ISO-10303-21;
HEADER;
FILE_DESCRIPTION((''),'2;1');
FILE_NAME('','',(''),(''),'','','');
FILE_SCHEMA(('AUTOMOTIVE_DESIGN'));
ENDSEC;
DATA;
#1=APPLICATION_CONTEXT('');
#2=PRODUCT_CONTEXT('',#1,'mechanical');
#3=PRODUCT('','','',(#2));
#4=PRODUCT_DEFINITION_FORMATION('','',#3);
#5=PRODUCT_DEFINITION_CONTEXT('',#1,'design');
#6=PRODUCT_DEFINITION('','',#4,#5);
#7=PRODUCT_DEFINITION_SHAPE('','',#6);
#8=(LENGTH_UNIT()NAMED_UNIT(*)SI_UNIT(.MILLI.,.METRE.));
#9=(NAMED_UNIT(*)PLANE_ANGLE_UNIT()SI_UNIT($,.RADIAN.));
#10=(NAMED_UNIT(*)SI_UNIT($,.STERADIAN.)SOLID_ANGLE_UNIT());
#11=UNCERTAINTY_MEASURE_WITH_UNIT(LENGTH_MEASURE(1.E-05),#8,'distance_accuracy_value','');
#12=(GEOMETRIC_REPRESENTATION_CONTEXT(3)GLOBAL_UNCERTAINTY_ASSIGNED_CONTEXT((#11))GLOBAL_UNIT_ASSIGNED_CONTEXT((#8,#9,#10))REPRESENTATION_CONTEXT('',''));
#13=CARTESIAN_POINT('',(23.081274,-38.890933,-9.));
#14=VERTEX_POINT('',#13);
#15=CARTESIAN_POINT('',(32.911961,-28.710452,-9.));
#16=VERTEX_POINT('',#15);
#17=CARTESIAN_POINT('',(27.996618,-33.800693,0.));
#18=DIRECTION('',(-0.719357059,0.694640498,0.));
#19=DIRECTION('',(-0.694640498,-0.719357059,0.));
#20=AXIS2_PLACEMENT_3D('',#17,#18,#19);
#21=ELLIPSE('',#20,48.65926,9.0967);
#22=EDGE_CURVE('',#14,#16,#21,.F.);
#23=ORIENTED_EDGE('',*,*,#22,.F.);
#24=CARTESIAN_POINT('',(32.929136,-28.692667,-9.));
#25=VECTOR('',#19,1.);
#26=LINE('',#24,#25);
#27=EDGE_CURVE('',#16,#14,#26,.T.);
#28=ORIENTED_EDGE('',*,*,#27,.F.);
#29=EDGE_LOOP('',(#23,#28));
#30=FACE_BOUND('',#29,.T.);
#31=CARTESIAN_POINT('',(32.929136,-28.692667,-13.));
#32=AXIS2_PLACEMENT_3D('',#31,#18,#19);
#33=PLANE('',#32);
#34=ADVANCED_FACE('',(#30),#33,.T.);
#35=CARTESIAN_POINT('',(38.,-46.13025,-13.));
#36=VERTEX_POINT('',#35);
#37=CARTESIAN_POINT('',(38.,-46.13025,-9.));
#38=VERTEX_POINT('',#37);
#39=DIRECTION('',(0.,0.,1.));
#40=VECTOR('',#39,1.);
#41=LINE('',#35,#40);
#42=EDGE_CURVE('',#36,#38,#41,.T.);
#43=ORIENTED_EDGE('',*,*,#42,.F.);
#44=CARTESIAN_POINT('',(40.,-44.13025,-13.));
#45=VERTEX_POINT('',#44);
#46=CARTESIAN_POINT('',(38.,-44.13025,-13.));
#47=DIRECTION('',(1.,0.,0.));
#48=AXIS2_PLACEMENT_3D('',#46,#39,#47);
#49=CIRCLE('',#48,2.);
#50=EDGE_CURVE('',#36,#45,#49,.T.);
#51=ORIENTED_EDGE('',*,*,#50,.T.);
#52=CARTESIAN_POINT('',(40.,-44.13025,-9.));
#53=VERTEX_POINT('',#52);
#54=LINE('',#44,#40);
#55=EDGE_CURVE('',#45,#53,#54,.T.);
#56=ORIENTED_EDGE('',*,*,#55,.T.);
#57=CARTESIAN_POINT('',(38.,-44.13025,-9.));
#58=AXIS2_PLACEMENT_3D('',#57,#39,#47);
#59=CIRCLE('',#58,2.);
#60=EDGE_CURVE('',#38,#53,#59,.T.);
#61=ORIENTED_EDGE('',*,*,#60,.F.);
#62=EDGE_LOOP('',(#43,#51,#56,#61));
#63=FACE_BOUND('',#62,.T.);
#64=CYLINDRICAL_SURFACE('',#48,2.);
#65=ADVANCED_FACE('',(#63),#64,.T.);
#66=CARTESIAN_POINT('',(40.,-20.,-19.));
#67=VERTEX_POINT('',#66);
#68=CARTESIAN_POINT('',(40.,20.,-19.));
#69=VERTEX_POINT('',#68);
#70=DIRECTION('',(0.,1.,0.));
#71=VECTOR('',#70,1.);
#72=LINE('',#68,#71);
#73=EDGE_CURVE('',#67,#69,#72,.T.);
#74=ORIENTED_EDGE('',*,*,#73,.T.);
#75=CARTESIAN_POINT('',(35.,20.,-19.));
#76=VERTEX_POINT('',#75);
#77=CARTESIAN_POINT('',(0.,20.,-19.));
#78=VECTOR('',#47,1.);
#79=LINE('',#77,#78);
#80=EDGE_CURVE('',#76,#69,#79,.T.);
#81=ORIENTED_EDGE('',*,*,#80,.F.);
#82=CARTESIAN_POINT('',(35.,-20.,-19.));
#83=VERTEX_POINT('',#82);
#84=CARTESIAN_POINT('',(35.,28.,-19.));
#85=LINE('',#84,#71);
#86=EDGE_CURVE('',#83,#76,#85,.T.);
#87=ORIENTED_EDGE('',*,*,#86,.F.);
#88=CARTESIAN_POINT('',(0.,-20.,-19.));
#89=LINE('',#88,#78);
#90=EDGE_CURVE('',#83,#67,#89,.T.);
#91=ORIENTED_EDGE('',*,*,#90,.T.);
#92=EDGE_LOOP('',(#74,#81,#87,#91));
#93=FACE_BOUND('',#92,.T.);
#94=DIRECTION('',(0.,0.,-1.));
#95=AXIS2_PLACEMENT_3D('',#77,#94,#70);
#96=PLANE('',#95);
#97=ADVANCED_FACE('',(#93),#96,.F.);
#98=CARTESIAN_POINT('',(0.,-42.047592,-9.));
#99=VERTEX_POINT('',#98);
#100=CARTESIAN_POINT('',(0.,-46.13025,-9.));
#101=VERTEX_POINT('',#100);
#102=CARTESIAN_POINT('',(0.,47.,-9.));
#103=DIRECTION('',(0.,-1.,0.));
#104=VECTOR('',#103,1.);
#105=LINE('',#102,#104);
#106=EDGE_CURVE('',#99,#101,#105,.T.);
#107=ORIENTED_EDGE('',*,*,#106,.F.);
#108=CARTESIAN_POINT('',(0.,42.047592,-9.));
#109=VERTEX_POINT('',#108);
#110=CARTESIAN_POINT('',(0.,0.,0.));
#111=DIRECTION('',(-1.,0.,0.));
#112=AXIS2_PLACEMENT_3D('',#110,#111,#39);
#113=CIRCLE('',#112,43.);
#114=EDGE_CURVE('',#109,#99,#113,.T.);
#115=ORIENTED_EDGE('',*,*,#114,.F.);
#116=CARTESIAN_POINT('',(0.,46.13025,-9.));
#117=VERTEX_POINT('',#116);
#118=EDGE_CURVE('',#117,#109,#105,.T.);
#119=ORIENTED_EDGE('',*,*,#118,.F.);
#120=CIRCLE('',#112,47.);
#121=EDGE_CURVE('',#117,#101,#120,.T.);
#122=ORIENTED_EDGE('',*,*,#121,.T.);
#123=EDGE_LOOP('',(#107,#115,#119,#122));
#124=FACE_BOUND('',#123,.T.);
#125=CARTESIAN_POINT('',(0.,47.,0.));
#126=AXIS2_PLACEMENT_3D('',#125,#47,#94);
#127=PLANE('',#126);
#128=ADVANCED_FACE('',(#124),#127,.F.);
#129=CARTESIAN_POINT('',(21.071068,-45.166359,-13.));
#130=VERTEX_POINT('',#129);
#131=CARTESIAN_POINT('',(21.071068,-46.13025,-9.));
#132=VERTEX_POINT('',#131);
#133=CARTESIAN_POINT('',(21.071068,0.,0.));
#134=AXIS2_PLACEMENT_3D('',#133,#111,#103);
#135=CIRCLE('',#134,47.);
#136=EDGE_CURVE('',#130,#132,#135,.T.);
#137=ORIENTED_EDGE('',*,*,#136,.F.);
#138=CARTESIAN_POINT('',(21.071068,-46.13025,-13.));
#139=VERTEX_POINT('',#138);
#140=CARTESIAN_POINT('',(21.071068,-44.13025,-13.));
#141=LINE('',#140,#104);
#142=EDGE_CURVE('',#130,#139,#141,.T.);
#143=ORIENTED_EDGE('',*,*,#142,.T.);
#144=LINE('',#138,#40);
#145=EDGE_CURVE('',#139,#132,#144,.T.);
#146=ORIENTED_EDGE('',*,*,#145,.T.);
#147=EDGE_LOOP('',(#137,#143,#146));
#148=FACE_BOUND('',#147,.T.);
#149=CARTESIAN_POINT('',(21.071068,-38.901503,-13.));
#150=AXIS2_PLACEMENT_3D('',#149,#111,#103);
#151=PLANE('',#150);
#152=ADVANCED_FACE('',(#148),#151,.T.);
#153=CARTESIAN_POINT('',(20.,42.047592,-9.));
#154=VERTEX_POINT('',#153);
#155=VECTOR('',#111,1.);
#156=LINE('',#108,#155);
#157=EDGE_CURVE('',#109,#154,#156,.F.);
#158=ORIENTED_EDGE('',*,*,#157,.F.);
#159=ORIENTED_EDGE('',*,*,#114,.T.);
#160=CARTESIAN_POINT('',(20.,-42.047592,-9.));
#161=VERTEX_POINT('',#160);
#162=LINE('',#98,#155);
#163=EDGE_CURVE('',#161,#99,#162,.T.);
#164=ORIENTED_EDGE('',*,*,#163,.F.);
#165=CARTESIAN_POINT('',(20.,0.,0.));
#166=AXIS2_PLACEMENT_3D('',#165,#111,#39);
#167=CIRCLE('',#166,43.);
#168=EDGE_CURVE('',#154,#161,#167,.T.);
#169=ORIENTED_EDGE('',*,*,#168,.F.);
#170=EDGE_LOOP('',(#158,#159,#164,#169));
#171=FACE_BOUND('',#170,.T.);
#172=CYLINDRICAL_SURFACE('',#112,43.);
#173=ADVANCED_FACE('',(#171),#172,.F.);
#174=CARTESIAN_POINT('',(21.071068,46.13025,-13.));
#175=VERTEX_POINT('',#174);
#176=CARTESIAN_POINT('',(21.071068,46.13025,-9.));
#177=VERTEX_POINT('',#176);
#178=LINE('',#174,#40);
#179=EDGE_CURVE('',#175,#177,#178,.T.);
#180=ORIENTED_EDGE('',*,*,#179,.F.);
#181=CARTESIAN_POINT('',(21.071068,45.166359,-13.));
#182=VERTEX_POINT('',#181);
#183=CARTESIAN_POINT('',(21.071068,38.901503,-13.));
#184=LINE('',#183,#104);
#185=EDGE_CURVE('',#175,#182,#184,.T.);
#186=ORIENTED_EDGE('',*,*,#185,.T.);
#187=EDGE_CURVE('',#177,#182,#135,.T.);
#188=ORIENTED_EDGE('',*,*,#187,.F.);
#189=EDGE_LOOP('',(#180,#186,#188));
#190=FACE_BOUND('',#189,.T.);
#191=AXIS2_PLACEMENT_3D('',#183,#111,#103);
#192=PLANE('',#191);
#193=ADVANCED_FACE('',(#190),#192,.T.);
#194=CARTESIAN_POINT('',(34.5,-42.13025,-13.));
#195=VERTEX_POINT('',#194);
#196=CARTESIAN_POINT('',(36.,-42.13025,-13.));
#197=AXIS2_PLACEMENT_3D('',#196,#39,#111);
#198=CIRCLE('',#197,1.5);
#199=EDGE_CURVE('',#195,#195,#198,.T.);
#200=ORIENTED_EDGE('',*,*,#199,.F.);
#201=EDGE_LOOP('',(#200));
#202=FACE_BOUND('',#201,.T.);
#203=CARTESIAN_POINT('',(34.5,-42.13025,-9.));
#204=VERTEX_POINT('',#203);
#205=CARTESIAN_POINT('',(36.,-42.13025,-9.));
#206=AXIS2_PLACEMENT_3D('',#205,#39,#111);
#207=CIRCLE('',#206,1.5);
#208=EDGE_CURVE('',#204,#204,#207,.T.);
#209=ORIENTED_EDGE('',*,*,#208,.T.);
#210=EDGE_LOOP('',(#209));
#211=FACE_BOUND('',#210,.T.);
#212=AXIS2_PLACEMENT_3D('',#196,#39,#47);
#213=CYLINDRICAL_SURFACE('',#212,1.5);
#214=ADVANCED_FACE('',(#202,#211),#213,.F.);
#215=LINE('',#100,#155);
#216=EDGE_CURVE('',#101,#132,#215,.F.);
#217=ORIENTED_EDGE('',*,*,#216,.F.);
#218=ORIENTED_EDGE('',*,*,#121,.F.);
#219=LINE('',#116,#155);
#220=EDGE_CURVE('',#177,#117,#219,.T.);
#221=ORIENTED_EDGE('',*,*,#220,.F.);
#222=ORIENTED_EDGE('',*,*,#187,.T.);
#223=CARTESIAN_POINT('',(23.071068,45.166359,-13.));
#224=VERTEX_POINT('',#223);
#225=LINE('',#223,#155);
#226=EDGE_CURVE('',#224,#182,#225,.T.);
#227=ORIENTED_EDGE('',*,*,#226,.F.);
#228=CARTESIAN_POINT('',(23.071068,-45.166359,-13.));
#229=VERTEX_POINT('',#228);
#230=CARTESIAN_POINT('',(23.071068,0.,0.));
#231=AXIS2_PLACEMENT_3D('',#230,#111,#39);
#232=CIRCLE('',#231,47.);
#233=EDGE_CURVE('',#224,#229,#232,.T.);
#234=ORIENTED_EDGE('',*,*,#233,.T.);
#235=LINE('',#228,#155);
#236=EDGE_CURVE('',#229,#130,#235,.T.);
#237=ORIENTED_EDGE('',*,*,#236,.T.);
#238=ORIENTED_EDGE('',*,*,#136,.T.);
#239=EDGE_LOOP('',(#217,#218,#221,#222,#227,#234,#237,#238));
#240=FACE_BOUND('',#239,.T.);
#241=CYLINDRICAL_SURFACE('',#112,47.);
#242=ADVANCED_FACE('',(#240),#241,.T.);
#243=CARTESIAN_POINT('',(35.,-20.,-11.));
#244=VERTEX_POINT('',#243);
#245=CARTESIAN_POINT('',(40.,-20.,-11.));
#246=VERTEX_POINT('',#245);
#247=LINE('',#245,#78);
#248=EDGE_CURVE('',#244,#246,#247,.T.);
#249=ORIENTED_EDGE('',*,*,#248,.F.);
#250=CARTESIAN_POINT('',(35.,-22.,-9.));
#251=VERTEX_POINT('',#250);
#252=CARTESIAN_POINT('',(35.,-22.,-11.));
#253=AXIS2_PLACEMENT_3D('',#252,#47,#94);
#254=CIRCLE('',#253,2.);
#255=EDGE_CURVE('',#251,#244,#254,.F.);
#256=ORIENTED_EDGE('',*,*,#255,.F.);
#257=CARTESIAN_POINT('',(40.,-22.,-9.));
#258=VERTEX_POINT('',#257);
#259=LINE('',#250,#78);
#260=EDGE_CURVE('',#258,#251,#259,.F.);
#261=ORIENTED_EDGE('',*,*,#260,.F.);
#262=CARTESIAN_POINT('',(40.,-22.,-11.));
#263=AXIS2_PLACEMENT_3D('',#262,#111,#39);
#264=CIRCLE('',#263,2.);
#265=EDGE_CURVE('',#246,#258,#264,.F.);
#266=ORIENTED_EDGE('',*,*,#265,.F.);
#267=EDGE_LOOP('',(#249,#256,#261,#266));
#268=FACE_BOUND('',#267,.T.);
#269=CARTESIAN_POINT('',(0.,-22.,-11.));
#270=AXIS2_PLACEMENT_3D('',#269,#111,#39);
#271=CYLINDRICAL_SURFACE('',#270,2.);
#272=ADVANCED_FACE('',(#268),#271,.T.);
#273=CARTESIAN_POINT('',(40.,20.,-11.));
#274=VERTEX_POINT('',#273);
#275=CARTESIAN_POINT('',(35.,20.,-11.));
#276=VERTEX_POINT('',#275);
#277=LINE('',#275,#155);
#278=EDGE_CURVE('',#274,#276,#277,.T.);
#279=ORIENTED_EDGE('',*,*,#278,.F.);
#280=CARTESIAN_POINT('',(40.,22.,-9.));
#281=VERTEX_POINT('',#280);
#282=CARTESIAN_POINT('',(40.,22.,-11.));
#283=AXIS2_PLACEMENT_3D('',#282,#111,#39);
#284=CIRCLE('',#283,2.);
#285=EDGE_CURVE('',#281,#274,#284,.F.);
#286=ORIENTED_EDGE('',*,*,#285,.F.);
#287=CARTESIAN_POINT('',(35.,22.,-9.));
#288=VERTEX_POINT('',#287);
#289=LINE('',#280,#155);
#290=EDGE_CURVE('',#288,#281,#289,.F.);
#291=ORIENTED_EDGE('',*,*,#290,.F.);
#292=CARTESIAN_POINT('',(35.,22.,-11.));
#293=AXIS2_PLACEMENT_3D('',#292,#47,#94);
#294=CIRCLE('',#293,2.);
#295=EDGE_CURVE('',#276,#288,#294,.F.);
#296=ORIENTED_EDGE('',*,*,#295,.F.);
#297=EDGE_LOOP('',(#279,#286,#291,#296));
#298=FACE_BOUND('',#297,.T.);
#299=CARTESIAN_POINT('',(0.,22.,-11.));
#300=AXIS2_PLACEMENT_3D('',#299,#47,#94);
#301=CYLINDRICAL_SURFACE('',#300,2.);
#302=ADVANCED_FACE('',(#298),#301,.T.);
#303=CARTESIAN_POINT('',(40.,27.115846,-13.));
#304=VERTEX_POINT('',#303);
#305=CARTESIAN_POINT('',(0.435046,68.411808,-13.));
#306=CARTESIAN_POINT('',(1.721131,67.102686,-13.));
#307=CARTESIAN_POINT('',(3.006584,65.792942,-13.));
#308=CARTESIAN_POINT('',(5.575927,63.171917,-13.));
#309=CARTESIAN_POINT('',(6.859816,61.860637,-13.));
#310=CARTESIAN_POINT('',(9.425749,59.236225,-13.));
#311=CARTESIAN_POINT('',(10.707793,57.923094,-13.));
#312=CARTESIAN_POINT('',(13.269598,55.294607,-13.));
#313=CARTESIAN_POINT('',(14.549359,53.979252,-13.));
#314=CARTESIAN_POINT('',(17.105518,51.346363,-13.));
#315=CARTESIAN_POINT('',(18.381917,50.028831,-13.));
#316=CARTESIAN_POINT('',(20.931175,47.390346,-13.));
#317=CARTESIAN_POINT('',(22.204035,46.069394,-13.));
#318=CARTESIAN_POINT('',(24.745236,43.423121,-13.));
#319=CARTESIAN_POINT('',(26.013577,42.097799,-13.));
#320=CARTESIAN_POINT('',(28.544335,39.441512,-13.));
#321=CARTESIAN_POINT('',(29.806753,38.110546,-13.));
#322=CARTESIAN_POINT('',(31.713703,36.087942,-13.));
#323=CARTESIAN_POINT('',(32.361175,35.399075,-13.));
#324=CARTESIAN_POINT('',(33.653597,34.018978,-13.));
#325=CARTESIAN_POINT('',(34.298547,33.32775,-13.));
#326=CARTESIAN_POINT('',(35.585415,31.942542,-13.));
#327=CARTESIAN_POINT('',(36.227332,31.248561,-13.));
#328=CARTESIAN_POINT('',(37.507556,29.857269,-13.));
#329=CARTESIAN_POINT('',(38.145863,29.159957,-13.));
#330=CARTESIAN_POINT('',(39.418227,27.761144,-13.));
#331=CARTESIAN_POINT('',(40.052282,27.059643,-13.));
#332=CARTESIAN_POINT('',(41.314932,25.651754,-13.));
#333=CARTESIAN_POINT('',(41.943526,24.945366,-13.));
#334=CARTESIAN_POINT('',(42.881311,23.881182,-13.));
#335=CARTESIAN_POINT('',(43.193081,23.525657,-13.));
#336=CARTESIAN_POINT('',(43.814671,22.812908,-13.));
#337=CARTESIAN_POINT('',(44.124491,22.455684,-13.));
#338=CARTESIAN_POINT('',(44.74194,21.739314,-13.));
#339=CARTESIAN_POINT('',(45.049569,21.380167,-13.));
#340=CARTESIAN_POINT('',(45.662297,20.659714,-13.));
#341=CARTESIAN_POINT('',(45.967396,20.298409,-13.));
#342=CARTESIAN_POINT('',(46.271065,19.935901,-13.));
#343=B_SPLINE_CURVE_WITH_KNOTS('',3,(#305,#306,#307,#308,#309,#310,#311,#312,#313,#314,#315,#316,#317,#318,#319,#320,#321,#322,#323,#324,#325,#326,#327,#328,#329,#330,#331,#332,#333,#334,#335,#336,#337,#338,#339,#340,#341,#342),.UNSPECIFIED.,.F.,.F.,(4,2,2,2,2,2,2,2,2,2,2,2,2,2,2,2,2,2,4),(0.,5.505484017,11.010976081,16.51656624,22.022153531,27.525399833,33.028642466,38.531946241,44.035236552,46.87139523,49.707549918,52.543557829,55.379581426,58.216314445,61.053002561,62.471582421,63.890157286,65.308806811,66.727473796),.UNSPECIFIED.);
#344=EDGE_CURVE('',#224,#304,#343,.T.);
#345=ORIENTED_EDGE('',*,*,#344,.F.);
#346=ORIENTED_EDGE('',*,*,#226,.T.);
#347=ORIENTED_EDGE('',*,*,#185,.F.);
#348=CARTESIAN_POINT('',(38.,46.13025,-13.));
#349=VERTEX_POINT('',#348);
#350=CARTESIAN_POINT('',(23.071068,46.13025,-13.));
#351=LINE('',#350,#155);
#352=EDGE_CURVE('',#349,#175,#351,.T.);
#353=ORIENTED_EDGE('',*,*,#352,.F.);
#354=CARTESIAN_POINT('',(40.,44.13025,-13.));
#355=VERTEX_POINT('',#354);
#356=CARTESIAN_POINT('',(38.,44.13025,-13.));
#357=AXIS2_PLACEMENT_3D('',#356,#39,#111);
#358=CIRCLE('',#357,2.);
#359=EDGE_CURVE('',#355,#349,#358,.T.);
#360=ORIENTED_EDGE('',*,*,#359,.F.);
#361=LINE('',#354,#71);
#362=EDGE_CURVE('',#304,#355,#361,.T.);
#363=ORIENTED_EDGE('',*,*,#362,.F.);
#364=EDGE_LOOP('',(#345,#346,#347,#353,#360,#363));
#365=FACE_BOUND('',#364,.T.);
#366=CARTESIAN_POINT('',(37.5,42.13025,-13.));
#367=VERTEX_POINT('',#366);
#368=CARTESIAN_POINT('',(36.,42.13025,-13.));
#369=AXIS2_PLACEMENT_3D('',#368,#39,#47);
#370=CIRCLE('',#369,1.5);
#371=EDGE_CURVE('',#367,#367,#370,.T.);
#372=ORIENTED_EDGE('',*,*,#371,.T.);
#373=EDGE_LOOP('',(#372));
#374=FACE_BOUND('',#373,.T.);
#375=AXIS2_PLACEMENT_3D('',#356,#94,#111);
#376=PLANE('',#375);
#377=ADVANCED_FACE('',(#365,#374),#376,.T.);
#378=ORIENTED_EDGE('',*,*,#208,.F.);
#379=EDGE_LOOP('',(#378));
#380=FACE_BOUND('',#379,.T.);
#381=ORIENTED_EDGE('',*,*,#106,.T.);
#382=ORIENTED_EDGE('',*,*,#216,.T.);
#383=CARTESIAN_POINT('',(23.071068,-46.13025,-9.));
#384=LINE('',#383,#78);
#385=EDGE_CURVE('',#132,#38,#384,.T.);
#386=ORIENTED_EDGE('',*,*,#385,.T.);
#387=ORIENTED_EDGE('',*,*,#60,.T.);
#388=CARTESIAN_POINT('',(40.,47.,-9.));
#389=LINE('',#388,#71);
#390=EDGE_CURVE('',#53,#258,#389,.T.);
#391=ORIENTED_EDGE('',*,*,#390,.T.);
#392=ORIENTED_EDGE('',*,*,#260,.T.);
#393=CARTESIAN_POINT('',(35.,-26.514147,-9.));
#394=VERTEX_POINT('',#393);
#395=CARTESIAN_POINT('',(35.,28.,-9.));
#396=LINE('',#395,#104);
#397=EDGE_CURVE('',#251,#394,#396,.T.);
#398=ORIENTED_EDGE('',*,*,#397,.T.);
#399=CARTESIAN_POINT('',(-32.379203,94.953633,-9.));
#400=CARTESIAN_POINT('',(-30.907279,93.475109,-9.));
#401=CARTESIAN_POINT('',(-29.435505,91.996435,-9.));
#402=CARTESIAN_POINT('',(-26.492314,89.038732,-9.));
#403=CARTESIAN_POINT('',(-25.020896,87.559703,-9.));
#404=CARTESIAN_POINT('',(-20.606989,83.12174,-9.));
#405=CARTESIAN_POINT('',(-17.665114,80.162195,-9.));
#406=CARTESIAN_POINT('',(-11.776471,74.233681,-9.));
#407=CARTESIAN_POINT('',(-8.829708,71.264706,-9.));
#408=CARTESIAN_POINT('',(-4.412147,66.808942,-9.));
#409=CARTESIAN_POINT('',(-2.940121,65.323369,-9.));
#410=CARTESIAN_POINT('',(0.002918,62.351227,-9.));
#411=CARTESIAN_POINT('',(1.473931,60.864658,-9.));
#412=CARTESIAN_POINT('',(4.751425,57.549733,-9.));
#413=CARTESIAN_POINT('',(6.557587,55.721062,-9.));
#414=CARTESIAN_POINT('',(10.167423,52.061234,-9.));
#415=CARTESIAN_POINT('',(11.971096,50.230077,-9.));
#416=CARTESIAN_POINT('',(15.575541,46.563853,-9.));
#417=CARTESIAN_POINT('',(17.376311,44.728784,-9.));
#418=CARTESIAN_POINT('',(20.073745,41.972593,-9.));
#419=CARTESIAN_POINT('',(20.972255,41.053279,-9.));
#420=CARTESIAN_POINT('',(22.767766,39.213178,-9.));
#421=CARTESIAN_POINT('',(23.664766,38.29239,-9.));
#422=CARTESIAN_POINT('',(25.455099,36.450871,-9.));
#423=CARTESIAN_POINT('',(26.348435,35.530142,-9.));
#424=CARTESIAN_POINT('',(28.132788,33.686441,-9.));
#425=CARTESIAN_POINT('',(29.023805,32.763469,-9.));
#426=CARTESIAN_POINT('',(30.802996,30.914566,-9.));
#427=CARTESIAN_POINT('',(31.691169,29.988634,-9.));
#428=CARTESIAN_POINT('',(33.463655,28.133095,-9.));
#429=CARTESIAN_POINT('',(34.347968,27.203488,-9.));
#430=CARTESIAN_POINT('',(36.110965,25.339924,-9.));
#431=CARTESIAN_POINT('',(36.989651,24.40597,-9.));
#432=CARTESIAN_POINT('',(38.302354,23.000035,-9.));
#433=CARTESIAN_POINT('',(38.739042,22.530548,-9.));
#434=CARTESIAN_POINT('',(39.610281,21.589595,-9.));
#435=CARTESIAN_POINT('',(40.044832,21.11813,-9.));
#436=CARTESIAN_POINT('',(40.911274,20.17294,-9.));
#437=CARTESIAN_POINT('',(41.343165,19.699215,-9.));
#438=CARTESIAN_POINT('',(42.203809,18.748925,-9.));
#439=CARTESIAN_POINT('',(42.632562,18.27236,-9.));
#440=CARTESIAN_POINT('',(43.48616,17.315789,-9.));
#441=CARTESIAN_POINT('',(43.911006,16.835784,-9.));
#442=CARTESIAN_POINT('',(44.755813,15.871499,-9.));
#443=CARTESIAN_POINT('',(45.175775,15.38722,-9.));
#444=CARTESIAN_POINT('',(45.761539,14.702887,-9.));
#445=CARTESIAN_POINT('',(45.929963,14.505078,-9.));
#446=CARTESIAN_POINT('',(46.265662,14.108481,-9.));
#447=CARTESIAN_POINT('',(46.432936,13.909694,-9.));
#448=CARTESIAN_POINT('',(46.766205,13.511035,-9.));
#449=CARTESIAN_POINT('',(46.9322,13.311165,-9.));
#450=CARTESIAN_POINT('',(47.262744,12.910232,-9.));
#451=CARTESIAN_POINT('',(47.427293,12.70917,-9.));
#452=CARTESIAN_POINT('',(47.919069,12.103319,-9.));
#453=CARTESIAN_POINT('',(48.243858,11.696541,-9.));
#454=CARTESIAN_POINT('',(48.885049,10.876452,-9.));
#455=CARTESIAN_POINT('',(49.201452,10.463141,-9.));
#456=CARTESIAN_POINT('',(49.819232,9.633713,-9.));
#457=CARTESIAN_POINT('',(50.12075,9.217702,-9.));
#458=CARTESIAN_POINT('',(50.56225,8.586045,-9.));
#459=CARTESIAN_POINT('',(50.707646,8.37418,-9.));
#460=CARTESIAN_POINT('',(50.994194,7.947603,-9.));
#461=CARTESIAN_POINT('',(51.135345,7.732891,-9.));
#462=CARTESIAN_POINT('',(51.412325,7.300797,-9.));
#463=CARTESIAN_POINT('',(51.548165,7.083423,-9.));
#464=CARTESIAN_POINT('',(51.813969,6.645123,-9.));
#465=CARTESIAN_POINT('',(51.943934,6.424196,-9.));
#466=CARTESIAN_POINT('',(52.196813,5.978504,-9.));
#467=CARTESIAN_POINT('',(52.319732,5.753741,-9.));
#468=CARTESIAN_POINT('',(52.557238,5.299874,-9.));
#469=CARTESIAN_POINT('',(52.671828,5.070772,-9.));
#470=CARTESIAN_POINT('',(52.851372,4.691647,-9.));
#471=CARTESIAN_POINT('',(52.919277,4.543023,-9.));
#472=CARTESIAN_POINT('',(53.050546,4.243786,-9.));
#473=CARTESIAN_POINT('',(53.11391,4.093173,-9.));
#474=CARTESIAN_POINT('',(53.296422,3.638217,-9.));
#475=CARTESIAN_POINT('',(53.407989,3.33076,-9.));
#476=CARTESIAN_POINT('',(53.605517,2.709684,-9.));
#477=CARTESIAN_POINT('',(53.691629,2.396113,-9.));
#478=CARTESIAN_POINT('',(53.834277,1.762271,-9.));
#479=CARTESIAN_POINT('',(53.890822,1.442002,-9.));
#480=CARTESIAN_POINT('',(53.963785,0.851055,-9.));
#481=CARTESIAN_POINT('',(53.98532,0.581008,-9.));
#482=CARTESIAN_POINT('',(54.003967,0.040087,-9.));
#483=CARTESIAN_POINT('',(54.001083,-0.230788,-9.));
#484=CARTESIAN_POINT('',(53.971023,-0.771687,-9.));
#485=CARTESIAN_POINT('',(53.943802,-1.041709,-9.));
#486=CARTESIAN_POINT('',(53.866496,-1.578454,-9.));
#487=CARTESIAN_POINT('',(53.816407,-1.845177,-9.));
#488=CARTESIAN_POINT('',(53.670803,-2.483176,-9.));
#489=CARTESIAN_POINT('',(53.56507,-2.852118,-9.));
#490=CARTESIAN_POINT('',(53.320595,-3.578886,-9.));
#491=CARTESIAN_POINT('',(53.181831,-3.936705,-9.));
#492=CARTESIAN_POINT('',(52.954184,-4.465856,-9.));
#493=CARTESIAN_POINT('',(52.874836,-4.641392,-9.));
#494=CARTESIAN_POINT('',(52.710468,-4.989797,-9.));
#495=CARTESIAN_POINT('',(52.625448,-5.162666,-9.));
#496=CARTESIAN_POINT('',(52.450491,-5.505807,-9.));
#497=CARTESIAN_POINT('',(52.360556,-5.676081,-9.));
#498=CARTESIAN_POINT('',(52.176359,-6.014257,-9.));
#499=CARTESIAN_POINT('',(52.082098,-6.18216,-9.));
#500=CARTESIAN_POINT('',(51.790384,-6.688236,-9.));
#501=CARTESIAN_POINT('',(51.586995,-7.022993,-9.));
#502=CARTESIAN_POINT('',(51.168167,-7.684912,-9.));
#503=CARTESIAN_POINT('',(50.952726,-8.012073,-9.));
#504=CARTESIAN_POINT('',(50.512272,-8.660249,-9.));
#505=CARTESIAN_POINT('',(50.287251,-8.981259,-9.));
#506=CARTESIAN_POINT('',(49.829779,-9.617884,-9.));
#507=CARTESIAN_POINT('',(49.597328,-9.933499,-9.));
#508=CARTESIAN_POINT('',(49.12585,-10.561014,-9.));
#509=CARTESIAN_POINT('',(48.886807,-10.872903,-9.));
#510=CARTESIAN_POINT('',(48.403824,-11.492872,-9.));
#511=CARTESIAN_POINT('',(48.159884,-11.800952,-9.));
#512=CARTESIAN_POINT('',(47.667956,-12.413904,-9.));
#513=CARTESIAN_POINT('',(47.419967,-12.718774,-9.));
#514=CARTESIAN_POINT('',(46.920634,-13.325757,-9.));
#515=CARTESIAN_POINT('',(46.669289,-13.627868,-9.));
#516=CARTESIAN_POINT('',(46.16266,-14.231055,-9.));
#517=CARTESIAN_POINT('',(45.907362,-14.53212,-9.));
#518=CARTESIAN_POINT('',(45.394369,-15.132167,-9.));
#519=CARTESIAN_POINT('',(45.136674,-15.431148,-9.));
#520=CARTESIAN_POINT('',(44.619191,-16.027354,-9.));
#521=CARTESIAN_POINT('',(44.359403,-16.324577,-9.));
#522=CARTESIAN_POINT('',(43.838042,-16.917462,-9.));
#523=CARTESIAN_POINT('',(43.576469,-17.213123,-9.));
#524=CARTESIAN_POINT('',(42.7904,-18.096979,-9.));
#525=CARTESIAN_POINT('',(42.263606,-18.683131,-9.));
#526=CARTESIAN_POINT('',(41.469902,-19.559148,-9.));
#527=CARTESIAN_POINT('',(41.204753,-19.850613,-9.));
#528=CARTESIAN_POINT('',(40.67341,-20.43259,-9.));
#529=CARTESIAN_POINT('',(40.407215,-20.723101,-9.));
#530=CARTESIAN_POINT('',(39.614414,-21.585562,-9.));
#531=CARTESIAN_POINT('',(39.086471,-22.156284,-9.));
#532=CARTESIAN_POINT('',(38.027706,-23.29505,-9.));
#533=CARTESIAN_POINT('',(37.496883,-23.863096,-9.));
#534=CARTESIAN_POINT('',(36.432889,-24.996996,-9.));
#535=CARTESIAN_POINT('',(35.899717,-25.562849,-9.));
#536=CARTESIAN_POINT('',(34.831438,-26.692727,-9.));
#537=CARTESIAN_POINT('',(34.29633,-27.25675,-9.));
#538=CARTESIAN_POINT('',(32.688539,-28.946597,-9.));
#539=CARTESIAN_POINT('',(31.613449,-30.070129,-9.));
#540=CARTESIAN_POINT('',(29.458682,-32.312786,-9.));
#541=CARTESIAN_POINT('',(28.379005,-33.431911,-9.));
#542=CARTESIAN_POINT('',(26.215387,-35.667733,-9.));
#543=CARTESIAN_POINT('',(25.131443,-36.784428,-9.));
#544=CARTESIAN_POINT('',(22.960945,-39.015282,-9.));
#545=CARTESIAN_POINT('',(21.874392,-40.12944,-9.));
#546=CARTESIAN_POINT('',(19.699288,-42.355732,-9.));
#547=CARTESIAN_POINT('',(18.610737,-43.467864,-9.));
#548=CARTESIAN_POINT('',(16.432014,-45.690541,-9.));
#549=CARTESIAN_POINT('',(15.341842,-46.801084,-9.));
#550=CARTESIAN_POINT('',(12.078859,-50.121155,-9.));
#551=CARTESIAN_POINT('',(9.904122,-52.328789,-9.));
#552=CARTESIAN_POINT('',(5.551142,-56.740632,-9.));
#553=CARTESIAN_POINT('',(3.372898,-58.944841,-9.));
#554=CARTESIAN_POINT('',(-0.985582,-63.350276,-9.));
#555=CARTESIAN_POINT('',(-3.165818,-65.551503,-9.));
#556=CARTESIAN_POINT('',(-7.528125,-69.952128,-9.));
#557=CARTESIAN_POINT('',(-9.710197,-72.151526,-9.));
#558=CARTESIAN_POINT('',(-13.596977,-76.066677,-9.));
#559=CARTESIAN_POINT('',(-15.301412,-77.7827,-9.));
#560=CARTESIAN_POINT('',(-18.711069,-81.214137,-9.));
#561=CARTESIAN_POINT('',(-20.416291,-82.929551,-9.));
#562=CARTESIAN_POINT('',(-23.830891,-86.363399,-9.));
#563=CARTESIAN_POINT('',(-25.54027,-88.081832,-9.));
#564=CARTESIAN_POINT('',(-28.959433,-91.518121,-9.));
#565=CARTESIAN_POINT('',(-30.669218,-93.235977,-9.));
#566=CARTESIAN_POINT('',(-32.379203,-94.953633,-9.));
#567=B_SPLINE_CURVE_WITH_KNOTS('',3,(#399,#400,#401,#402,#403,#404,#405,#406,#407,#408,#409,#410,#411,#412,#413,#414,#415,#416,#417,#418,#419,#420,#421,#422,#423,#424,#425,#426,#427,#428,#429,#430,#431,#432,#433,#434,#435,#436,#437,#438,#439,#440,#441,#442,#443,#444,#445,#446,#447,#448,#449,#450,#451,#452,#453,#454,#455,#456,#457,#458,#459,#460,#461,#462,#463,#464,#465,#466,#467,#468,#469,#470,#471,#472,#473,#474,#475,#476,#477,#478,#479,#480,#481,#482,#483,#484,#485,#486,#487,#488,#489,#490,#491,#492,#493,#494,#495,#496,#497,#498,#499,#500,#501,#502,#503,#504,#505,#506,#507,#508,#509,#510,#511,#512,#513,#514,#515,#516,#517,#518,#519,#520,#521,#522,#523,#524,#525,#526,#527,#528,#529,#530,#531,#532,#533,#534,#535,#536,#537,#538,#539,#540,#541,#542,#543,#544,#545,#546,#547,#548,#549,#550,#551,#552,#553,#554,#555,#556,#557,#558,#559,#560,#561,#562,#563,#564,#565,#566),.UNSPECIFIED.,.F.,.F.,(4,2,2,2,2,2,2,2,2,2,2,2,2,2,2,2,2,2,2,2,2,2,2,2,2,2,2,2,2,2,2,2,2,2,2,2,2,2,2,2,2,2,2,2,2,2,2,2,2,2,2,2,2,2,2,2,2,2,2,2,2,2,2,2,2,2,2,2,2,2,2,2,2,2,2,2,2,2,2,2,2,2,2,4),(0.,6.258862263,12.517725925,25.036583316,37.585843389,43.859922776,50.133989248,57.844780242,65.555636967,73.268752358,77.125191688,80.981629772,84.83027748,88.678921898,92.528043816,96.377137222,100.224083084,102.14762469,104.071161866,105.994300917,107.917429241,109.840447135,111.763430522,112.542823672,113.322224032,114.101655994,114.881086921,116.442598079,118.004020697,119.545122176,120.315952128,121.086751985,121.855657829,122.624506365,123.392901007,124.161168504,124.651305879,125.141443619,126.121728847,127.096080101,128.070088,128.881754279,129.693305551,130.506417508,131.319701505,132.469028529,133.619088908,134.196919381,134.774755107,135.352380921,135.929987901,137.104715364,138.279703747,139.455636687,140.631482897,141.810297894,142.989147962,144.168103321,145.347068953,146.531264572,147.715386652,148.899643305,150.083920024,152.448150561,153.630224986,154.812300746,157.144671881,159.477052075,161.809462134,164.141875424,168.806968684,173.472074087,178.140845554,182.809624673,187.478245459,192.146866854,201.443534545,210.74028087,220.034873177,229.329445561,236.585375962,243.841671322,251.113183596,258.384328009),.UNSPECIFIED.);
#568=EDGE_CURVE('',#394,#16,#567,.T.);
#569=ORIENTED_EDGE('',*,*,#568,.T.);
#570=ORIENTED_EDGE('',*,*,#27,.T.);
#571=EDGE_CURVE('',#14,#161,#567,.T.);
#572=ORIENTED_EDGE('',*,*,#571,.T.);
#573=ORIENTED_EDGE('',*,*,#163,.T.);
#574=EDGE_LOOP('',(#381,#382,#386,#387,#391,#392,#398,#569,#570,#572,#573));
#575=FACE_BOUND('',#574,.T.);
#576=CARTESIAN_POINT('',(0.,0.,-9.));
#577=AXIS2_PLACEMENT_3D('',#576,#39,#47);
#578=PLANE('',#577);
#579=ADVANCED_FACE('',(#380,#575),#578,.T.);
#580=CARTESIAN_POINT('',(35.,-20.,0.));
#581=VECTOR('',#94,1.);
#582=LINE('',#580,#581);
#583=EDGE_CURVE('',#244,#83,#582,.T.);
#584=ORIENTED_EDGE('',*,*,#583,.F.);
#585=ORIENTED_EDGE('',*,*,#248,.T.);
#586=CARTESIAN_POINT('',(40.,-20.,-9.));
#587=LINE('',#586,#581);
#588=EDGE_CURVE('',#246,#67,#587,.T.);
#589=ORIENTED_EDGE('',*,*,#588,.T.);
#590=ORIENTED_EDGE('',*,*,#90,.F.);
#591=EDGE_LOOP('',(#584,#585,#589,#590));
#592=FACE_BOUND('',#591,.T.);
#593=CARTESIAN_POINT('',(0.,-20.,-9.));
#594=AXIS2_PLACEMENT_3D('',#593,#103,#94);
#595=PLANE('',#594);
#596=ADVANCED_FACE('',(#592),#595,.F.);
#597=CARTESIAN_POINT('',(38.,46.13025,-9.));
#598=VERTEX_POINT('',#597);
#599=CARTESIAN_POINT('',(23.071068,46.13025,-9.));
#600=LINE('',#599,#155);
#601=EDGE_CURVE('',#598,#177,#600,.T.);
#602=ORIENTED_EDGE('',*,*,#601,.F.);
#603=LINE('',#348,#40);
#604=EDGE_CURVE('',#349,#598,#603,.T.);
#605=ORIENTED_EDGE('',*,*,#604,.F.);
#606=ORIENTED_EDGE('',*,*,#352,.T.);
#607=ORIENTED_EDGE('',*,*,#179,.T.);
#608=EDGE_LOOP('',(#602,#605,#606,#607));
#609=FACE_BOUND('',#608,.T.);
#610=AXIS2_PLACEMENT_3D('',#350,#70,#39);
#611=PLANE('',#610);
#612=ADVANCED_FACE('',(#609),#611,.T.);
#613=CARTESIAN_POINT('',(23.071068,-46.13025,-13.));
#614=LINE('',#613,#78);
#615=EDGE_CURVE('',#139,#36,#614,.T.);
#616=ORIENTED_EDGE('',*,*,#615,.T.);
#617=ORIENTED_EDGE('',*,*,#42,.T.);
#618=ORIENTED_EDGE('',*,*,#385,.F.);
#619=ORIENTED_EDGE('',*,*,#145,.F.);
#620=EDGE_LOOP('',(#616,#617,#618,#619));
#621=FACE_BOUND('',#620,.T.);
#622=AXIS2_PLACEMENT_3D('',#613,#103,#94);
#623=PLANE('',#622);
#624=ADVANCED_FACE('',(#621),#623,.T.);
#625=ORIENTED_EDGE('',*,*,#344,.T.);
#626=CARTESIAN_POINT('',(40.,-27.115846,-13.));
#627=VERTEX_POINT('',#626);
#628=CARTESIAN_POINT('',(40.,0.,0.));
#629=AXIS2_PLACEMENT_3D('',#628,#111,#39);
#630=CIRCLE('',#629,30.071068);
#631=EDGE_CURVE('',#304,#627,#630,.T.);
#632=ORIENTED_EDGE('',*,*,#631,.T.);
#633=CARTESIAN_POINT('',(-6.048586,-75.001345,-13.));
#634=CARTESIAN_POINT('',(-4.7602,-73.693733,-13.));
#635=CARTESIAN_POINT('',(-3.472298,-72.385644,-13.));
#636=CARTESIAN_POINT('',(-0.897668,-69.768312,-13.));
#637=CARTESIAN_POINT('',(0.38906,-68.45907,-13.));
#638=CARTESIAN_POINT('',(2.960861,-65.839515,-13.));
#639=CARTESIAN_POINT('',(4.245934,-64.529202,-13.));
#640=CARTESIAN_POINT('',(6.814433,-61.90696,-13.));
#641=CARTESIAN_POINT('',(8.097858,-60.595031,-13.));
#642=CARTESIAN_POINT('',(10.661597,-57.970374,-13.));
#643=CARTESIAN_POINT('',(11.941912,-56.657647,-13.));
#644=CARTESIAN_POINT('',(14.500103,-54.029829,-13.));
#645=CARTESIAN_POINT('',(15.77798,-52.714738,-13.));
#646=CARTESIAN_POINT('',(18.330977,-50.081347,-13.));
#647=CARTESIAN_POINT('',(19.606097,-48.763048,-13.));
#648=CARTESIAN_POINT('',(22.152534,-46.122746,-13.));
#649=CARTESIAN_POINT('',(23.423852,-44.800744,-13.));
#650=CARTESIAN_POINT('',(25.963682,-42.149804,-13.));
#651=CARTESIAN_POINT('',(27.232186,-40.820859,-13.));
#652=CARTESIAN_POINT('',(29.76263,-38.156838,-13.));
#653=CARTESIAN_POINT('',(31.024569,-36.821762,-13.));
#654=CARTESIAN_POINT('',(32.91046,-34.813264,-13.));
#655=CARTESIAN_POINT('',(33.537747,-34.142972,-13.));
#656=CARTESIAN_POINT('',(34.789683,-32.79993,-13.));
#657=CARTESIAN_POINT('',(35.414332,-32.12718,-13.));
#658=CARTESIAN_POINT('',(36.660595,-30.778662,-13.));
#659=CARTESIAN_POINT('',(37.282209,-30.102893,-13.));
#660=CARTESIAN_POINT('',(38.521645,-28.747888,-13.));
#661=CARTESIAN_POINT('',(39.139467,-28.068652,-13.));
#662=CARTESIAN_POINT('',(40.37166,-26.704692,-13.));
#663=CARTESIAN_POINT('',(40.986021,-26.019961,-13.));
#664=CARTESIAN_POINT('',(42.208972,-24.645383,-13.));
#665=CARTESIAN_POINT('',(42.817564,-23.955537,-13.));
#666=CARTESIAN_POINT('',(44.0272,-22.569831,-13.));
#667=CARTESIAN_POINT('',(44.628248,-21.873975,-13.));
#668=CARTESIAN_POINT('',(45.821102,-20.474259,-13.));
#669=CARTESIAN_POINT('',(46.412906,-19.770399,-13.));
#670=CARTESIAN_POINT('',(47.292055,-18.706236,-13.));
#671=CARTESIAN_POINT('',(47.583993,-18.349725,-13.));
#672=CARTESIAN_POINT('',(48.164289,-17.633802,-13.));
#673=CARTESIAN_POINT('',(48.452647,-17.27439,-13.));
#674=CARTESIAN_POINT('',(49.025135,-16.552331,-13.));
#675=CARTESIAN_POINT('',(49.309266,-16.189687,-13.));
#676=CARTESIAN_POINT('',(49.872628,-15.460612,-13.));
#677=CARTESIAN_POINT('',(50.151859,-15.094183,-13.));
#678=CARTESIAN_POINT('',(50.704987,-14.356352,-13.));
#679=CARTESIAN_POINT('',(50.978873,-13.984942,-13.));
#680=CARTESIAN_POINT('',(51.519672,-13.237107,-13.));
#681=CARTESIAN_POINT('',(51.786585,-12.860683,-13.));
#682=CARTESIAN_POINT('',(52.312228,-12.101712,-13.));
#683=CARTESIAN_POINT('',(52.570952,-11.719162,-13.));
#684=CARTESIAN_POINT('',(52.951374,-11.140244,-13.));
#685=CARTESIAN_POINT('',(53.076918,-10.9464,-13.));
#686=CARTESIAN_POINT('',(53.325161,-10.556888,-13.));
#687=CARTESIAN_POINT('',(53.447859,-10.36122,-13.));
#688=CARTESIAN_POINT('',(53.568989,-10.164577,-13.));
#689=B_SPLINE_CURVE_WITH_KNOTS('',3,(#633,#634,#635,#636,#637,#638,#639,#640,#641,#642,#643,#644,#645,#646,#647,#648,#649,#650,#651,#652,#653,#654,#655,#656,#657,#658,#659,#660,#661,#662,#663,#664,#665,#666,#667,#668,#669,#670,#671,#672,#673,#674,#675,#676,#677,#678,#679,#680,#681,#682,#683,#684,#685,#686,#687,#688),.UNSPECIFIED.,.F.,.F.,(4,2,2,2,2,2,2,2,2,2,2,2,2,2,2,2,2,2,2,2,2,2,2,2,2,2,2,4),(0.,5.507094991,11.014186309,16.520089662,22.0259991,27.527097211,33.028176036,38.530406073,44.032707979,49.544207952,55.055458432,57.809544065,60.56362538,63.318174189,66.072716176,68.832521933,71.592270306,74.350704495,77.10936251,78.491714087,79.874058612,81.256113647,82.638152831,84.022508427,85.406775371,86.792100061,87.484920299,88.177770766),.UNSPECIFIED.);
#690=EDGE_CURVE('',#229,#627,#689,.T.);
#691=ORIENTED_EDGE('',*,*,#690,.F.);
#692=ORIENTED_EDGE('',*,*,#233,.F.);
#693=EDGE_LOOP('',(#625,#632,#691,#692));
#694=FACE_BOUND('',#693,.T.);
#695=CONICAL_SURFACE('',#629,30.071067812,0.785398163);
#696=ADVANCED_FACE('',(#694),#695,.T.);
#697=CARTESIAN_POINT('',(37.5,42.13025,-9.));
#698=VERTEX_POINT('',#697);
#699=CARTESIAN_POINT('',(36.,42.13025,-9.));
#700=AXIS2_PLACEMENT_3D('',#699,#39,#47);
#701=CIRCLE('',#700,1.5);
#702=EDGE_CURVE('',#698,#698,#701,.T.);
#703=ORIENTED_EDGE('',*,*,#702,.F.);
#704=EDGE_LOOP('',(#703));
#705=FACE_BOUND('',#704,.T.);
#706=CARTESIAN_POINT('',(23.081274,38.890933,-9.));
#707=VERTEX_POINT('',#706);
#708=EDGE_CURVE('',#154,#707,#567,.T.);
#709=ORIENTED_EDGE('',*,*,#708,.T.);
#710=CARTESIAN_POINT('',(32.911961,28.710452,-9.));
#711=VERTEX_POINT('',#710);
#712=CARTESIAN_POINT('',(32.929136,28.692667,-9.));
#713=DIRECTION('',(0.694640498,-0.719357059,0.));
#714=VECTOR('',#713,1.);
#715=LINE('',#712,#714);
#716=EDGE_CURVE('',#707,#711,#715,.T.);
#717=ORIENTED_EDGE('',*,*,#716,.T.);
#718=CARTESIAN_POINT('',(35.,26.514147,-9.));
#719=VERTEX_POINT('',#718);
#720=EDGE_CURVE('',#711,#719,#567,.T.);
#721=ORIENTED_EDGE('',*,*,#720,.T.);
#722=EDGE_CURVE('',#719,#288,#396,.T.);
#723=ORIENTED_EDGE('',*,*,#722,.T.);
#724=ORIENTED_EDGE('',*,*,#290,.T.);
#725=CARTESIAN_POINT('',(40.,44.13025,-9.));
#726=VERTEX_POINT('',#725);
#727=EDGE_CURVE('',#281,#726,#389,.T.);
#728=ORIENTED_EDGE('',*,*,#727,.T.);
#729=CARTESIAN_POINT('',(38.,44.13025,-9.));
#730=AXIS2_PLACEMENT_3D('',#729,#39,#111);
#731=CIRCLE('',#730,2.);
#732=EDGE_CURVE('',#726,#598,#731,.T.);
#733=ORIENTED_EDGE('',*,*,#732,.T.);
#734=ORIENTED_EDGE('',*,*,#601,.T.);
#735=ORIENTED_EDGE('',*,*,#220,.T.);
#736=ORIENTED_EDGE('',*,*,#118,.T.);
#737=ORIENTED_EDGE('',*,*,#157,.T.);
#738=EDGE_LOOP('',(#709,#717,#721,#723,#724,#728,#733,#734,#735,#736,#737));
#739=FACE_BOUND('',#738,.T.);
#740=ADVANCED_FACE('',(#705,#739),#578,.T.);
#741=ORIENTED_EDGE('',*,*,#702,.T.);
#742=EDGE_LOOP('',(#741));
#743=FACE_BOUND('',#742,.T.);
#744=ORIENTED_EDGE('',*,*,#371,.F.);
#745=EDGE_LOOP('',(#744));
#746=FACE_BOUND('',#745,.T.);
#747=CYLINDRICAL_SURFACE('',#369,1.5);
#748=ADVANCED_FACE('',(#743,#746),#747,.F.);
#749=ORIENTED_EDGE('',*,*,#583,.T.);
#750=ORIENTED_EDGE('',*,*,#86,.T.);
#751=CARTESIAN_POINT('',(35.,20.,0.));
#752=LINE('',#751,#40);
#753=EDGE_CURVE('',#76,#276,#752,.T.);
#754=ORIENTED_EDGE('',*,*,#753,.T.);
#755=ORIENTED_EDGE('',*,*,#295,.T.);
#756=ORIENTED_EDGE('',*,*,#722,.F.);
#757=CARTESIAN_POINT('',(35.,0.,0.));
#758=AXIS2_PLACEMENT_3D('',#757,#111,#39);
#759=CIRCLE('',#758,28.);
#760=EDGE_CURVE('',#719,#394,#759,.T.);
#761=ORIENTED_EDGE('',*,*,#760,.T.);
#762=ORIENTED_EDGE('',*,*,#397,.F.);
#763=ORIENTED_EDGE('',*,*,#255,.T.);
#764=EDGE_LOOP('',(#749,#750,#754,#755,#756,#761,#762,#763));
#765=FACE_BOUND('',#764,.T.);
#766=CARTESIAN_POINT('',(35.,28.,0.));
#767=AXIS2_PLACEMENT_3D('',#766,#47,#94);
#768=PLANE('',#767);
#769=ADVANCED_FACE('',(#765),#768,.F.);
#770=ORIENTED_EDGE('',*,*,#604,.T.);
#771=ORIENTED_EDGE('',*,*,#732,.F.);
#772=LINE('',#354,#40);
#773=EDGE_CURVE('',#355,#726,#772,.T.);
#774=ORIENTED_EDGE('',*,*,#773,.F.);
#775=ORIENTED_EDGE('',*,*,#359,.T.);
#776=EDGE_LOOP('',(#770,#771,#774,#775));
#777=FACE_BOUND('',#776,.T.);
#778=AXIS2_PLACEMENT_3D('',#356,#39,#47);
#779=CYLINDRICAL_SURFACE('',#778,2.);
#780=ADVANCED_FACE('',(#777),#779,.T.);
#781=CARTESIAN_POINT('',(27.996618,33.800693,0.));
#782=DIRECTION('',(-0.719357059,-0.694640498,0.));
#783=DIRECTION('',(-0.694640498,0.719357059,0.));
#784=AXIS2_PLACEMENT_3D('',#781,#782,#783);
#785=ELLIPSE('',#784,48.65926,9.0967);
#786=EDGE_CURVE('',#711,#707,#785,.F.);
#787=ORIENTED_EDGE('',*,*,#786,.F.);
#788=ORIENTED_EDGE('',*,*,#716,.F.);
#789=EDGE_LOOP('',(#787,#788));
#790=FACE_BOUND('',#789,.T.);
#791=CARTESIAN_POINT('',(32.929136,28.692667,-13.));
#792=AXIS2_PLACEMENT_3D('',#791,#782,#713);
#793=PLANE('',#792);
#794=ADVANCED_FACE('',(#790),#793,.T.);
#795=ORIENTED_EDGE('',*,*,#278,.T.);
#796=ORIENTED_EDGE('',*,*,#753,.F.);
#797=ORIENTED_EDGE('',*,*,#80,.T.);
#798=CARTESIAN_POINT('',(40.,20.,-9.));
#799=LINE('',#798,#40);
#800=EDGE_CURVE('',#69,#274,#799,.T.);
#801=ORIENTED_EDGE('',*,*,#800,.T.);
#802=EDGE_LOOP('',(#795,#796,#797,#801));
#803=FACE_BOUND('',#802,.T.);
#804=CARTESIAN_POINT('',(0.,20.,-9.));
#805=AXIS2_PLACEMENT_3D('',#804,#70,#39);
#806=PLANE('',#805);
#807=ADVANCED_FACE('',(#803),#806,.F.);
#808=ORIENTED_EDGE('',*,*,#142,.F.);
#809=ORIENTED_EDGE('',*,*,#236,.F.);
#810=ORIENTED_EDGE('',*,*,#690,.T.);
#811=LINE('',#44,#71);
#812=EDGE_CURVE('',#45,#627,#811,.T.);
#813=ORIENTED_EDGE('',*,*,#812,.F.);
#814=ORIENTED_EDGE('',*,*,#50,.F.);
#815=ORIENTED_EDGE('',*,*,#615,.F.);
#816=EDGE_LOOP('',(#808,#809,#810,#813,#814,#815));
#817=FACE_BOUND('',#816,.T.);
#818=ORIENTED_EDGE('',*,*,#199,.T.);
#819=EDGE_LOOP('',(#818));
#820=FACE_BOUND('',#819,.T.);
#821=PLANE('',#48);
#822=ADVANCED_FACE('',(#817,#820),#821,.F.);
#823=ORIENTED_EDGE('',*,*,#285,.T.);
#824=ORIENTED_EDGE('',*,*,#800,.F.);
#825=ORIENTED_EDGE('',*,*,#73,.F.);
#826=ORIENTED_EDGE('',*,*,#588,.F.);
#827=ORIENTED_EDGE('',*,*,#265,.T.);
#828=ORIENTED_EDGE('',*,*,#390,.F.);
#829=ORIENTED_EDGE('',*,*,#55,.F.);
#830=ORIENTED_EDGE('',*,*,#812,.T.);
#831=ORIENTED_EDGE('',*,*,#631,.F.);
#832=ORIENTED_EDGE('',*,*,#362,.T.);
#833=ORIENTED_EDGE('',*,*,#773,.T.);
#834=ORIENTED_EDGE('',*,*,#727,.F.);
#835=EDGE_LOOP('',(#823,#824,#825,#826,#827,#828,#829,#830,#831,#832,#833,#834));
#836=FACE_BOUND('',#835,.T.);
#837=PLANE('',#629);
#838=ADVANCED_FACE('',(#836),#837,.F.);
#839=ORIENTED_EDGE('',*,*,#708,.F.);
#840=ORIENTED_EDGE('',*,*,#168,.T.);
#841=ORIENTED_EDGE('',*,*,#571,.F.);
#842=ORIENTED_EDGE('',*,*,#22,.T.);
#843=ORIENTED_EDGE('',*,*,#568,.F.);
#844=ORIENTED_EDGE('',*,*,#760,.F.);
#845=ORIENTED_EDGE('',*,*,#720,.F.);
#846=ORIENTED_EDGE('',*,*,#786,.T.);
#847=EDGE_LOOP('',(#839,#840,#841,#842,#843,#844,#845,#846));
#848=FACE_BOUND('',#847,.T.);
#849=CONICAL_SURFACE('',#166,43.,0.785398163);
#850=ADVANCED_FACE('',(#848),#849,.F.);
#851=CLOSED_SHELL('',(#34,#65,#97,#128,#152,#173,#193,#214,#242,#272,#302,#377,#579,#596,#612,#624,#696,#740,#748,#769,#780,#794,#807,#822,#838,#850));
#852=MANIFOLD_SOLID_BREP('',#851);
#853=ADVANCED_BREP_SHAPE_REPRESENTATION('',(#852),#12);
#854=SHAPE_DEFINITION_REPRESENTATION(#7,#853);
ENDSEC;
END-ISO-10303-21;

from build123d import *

# Parameters (mm, degrees)
CUT_EXTRUDE1_DEPTH      = 78.575769413
CUT_EXTRUDE1_DEPTH_BACK = 9
SKETCH2_W               = 40
SKETCH2_H               = 94
SKETCH3_W               = 10
SKETCH3_H               = 40
CUT_EXTRUDE2_DEPTH      = 78.05193054
SKETCH4_R               = 1.5
BOSS_EXTRUDE1_DEPTH     = 4
MOVE_START              = -46.130250379
MOVE_FACE1_OUTLINE_W    = 16.928932188
MOVE_FACE1_OUTLINE_H    = 4
MOVE_FACE1_DEPTH        = 0.963891216
MOVE_START_2            = 45.166359163
MOVE_FACE1_2_OUTLINE_W  = 16.928932188
MOVE_FACE1_2_OUTLINE_H  = 4
MOVE_FACE1_2_DEPTH      = 0.963891216
MOVE_START_3            = -28.692666648
MOVE_FACE1_3_DEPTH      = 1.57682047
MOVE_START_4            = 27.115846178
MOVE_FACE1_4_DEPTH      = 1.57682047
FILLET1_R               = 2


with BuildPart() as part:
    # Sketch1 → Revolve1 (revolve)
    with BuildSketch(Plane.XY, mode=Mode.PRIVATE) as revolve1_sk:
        Polygon((0, 47), (23.071067812, 47), (40, 30.071067812), (40, 0), (35, 0), (35, 28), (20, 43), (0, 43), align=None)
    revolve(revolve1_sk.sketch.rotate(Axis((0, 0, 0), (1, 0, 0)), 90), axis=Axis((0, 0, 0), (1, 0, 0)))

    # Sketch2 → Cut-Extrude1 (cut, two sides: drawn at the far end of the back side and taken through both)
    with BuildSketch(Plane.XY.offset(-CUT_EXTRUDE1_DEPTH_BACK)):
        with Locations((20, 0)):
            Rectangle(SKETCH2_W, SKETCH2_H)
    extrude(amount=CUT_EXTRUDE1_DEPTH + CUT_EXTRUDE1_DEPTH_BACK, mode=Mode.SUBTRACT)

    # Sketch3 → Cut-Extrude2 (cut, through all)
    with BuildSketch(Plane(origin=(40, 0, 0), x_dir=(0, 0, -1), z_dir=(1, 0, 0))):
        with Locations((14, 0)):
            Rectangle(SKETCH3_W, SKETCH3_H)
    extrude(amount=-CUT_EXTRUDE2_DEPTH, mode=Mode.SUBTRACT)

    # Sketch4 → Boss-Extrude1 (add)
    # profile 1 of 2: a face of its own
    with BuildSketch(Plane.XY.offset(-9)):
        with BuildLine():
            Line((23.071067812, 46.130250379), (38, 46.130250379))
            ThreePointArc((38, 46.130250379), (39.414213562, 45.544463941), (40, 44.130250379))
            Line((40, 44.130250379), (40, 28.692666648))
            Line((40, 28.692666648), (32.929135877, 28.692666648))
            Line((32.929135877, 28.692666648), (23.071067812, 38.901502546))
            Line((23.071067812, 38.901502546), (23.071067812, 46.130250379))
        make_face()
        with Locations((36, 42.130250379)):
            Circle(SKETCH4_R, mode=Mode.SUBTRACT)
    # profile 2 of 2: a face of its own
    with BuildSketch(Plane.XY.offset(-9)):
        with BuildLine():
            Line((23.071067812, -38.901502546), (23.071067812, -46.130250379))
            Line((23.071067812, -46.130250379), (38, -46.130250379))
            ThreePointArc((38, -46.130250379), (39.414213562, -45.544463941), (40, -44.130250379))
            Line((40, -44.130250379), (40, -28.692666648))
            Line((40, -28.692666648), (32.929135877, -28.692666648))
            Line((32.929135877, -28.692666648), (23.071067812, -38.901502546))
        make_face()
        with Locations(Location((36, -42.130250379, 0), (0, 0, 180))):
            Circle(SKETCH4_R, mode=Mode.SUBTRACT)
    extrude(amount=-BOSS_EXTRUDE1_DEPTH)


with BuildPart() as move_face1_tool:
    # Move Face1: read off the stored shape, not the designer's step
    # Move Face1 outline → Move Face1 (new body)
    with BuildSketch(Plane(origin=(0, 0, 0), x_dir=(1, 0, 0), z_dir=(0, 1, 0)).offset(MOVE_START)):
        with Locations((29.535533906, 11)):
            Rectangle(MOVE_FACE1_OUTLINE_W, MOVE_FACE1_OUTLINE_H)
    extrude(amount=MOVE_FACE1_DEPTH)


with BuildPart() as part_1:
    add(part.part)


with BuildPart() as part_2:
    # Move Face1: joined with move_face1_tool
    add(part_1.part.fuse(move_face1_tool.part, tol=0.00001))


with BuildPart() as move_face1_2_tool:
    # Move Face1 2 outline → Move Face1 2 (new body)
    with BuildSketch(Plane(origin=(0, 0, 0), x_dir=(1, 0, 0), z_dir=(0, 1, 0)).offset(MOVE_START_2)):
        with Locations((29.535533906, 11)):
            Rectangle(MOVE_FACE1_2_OUTLINE_W, MOVE_FACE1_2_OUTLINE_H)
    extrude(amount=MOVE_FACE1_2_DEPTH)


with BuildPart() as part_3:
    add(part_2.part)


with BuildPart() as part_4:
    # Move Face1 2: joined with move_face1_2_tool
    add(part_3.part.fuse(move_face1_2_tool.part, tol=0.00001))


with BuildPart() as move_face1_3_tool:
    # Move Face1 3 outline → Move Face1 3 (new body)
    with BuildSketch(Plane(origin=(0, 0, 0), x_dir=(1, 0, 0), z_dir=(0, 1, 0)).offset(MOVE_START_3)):
        with BuildLine():
            Line((40, 13), (38.57076781, 13.000001435))
            add(Edge.make_bspline(
                [(38.57076781, 13.000001435), (38.71437599, 12.652027053), (38.853897492, 12.302357037), (39.340707465, 11.036237384), (39.662536412, 10.10974197), (39.965458557, 9.114909953), (39.982798274, 9.057475387), (40.00000015, 9.000000045)],
                knots=[15.019424216, 15.019424216, 15.019424216, 15.019424216, 16.148697383, 16.148697383, 19.088168409, 19.088168409, 19.268134003, 19.268134003, 19.268134003, 19.268134003], degree=3))
            Line((40.00000015, 9.000000045), (40, 13))
        make_face()
    extrude(amount=MOVE_FACE1_3_DEPTH)


with BuildPart() as part_5:
    add(part_4.part)


with BuildPart() as part_6:
    # Move Face1 3: joined with move_face1_3_tool
    add(part_5.part.fuse(move_face1_3_tool.part, tol=0.00001))


with BuildPart() as move_face1_4_tool:
    # Move Face1 4 outline → Move Face1 4 (new body)
    with BuildSketch(Plane(origin=(0, 0, 0), x_dir=(1, 0, 0), z_dir=(0, 1, 0)).offset(MOVE_START_4)):
        with BuildLine():
            Line((40, 13), (38.57076781, 13.000001435))
            add(Edge.make_bspline(
                [(38.57076781, 13.000001435), (38.71437599, 12.652027053), (38.853897492, 12.302357037), (39.340707465, 11.036237384), (39.662536412, 10.10974197), (39.965458557, 9.114909953), (39.982798274, 9.057475387), (40.00000015, 9.000000045)],
                knots=[15.019424216, 15.019424216, 15.019424216, 15.019424216, 16.148697383, 16.148697383, 19.088168409, 19.088168409, 19.268134003, 19.268134003, 19.268134003, 19.268134003], degree=3))
            Line((40.00000015, 9.000000045), (40, 13))
        make_face()
    extrude(amount=MOVE_FACE1_4_DEPTH)


with BuildPart() as part_7:
    add(part_6.part)


with BuildPart() as part_8:
    # Move Face1 4: joined with move_face1_4_tool
    add(part_7.part.fuse(move_face1_4_tool.part, tol=0.00001))

    # Fillet1
    fillet1_edges = [part_8.edges().sort_by_distance(p)[0] for p in [
        (37.5, -20, -9),
        (37.5, 20, -9),
    ]]
    fillet(fillet1_edges, radius=FILLET1_R)


solid = part_8.part
